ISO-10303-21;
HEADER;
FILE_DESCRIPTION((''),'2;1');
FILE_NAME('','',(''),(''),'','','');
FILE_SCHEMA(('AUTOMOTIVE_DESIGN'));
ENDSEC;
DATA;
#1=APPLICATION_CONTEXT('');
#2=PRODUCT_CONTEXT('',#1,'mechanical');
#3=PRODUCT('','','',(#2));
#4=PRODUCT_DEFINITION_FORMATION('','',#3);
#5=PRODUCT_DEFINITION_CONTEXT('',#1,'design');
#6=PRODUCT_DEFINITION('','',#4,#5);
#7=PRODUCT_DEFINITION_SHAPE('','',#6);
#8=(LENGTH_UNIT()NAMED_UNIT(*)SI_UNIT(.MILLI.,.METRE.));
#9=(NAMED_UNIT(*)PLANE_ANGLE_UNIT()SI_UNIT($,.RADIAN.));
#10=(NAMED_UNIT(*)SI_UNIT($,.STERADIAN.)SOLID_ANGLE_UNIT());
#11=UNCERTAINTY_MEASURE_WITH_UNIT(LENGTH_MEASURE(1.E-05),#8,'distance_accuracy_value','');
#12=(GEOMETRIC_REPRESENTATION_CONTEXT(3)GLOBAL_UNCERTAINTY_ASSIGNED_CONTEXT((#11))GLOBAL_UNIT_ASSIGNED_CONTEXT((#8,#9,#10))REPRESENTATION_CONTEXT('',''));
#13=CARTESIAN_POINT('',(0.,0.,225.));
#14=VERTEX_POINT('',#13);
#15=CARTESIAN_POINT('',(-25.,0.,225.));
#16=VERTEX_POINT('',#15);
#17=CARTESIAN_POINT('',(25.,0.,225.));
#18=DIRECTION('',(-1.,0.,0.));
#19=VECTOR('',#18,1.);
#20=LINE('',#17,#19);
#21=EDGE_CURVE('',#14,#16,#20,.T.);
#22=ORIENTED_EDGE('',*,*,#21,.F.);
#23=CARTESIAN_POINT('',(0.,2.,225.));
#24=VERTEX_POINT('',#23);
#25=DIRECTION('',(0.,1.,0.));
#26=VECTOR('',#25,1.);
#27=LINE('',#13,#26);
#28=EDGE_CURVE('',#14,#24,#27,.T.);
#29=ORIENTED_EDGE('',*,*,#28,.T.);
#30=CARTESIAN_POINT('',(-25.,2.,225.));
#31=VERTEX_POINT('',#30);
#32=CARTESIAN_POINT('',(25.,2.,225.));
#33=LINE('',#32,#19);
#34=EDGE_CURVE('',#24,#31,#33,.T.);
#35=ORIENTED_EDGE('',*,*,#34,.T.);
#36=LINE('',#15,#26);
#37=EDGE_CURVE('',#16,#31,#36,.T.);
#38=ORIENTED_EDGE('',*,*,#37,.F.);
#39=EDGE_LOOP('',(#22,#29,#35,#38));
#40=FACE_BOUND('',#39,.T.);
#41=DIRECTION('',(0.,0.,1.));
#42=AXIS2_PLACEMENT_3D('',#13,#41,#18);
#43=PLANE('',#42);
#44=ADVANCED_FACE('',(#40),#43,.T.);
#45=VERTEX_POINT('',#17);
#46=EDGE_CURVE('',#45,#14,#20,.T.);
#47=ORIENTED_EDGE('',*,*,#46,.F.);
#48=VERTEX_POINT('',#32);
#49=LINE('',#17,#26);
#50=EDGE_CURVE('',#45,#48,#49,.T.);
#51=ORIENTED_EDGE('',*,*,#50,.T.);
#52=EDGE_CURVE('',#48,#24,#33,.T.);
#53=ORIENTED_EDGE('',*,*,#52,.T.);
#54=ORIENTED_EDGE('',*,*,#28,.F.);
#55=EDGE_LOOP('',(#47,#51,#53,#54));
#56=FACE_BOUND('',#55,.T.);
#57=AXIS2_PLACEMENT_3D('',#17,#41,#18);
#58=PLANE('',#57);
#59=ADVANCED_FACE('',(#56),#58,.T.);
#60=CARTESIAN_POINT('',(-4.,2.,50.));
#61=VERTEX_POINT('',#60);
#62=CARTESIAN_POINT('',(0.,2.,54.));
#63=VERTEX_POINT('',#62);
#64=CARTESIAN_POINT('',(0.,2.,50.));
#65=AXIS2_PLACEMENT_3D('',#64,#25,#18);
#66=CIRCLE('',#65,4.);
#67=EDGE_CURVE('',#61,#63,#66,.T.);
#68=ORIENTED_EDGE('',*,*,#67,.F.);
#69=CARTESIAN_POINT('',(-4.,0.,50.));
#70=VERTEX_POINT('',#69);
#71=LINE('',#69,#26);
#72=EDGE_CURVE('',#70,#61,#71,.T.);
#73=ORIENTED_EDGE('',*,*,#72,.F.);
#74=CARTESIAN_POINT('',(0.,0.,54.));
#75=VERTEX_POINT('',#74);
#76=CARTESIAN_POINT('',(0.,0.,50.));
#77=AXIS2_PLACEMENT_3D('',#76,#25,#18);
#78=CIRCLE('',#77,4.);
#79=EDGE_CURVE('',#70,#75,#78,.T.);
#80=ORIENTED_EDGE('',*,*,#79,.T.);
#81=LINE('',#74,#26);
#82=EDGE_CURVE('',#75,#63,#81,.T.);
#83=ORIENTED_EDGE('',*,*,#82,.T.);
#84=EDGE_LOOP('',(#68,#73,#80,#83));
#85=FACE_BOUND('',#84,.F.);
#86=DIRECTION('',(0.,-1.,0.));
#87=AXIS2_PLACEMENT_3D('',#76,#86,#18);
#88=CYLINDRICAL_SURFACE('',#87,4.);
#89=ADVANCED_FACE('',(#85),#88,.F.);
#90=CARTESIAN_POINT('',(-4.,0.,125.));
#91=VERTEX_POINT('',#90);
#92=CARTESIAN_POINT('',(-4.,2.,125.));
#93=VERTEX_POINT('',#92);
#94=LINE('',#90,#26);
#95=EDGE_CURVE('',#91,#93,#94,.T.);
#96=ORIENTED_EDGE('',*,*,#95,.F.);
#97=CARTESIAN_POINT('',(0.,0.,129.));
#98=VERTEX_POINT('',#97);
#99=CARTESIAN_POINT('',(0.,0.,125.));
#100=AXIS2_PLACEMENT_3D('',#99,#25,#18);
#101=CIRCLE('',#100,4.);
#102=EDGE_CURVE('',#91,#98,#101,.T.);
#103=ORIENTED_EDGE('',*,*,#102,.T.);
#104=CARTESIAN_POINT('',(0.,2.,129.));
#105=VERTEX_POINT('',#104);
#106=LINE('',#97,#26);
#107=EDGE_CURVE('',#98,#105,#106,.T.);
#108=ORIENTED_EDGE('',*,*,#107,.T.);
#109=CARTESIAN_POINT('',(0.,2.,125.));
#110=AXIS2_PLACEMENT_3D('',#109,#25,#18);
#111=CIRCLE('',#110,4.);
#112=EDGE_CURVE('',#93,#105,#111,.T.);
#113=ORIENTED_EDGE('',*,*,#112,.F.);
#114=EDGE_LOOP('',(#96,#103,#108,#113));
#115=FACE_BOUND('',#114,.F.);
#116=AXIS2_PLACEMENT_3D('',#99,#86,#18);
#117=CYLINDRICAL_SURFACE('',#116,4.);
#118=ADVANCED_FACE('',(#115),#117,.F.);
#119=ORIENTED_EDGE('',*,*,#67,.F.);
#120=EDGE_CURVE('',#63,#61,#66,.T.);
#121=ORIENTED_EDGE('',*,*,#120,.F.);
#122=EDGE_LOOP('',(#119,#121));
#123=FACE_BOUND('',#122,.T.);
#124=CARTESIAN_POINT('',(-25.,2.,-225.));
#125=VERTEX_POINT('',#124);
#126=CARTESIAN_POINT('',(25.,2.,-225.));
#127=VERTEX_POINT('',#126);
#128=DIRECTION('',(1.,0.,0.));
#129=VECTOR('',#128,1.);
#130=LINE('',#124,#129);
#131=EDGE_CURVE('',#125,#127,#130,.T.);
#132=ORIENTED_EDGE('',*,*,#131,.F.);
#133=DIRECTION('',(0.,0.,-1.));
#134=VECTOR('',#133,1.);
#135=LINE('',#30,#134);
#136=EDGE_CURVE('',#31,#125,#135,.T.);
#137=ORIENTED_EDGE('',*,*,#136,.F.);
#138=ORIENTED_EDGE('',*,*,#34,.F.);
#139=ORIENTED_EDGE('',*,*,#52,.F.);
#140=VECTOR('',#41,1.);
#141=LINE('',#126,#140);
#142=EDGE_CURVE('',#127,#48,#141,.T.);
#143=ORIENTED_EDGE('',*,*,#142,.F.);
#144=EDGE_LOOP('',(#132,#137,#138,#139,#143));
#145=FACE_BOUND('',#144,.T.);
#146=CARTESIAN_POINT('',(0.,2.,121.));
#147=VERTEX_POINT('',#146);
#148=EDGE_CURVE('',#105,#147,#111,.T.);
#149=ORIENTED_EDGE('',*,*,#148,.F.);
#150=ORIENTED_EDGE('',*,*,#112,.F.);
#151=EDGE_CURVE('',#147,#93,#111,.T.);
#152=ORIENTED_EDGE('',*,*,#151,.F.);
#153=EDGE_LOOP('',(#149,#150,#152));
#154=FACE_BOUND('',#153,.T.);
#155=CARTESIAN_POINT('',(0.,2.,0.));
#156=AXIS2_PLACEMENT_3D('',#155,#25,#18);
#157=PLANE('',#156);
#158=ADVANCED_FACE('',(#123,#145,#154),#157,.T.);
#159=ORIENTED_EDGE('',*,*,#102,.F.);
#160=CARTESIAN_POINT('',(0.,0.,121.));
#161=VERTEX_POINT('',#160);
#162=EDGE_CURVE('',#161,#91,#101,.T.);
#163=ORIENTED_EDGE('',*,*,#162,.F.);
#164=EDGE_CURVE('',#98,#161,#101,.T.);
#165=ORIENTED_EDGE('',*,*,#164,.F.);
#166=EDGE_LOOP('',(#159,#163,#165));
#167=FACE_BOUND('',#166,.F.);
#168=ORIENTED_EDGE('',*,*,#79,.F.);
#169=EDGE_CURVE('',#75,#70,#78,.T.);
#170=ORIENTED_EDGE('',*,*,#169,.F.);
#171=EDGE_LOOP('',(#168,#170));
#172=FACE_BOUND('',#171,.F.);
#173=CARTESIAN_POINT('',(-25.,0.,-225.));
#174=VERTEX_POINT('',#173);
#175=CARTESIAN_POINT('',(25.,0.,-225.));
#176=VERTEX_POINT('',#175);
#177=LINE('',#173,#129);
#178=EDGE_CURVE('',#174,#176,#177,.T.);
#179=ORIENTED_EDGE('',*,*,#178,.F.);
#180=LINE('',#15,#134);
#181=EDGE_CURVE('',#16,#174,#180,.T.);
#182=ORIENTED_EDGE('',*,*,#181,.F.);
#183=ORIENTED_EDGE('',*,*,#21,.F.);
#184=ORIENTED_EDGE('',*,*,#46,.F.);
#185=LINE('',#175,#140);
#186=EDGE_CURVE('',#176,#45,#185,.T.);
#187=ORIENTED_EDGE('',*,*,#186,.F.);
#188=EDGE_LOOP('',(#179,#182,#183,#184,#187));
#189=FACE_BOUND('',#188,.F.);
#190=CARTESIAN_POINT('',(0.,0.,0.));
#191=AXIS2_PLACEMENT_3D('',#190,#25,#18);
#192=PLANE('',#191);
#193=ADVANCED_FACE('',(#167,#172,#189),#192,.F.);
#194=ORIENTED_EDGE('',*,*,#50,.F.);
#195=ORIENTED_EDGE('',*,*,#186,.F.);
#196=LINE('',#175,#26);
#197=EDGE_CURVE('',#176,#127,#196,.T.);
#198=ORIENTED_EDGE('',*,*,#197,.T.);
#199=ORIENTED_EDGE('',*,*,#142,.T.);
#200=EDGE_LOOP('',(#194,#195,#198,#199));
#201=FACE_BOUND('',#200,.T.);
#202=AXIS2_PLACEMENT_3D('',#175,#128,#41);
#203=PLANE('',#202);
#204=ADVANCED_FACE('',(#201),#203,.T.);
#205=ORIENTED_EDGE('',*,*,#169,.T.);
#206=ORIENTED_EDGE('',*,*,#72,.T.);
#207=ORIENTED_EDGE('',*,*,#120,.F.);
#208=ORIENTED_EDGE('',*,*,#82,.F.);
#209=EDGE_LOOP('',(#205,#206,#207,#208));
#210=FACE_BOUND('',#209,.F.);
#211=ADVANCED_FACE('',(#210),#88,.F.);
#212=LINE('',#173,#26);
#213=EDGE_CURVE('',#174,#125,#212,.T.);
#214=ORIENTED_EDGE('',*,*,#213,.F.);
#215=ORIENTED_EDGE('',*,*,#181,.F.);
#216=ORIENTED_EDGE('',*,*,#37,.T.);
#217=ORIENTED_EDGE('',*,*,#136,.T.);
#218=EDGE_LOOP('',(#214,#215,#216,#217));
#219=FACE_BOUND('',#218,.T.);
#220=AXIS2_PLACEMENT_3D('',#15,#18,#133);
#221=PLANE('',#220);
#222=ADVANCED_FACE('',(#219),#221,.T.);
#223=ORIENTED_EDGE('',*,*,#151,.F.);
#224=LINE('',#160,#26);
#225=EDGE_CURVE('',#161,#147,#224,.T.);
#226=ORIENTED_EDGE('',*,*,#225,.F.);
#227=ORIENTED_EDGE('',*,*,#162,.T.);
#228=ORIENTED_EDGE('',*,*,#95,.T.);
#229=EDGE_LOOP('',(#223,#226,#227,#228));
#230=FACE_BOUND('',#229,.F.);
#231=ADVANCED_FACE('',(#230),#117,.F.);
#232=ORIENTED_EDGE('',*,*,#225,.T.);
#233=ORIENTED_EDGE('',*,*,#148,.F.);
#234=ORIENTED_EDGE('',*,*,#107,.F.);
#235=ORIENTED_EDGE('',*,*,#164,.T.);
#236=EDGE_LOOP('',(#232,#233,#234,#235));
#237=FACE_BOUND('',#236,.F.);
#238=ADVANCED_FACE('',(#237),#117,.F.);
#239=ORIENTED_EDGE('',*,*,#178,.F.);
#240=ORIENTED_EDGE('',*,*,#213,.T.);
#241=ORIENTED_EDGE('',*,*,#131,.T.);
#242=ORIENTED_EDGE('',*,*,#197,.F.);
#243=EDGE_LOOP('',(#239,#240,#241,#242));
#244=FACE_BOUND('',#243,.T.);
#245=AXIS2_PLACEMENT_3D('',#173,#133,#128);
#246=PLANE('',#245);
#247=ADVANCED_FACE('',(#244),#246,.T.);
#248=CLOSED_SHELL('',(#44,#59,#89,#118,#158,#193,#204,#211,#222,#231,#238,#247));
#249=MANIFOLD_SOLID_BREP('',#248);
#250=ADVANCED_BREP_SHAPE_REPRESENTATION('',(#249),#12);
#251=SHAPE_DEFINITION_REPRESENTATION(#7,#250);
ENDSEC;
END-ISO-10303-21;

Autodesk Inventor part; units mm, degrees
ref_plane "YZ Plane" through (0, 0, 0) normal (1, 0, 0) x (0, 1, 0)
ref_plane "XZ Plane" through (0, 0, 0) normal (0, 1, 0) x (-1, 0, 0)
ref_plane "XY Plane" through (0, 0, 0) normal (0, 0, 1) x (1, 0, 0)
sketch "Sketch1" plane through (0, 0, 0) normal (0, 1, 0) x (-1, 0, 0)
  line L0 (-25, 225) -> (25, 225)
  line L1 (25, 225) -> (25, -225)
  line L2 (25, -225) -> (-25, -225)
  line L3 (-25, -225) -> (-25, 225)
  line L4 (-25, 225) -> (25, -225) construction
  line L5 (25, 225) -> (-25, -225) construction
  line L6 (0, 225) -> (0, 125)
  circle A0 centre (0, 125) radius 4
  line L7 (0, 125) -> (0, 50)
  circle A1 centre (0, 50) radius 4
  point P0 (0, 0)
  dimension "d0" = 50
  dimension "d1" = 450
  dimension "d6" = 100
  dimension "d7" = 8
  dimension "d8" = 75
  dimension "d9" = 8
extrude "Extrusion2" add sketch "Sketch1" along normal blind 2
properties part number "Lup"
